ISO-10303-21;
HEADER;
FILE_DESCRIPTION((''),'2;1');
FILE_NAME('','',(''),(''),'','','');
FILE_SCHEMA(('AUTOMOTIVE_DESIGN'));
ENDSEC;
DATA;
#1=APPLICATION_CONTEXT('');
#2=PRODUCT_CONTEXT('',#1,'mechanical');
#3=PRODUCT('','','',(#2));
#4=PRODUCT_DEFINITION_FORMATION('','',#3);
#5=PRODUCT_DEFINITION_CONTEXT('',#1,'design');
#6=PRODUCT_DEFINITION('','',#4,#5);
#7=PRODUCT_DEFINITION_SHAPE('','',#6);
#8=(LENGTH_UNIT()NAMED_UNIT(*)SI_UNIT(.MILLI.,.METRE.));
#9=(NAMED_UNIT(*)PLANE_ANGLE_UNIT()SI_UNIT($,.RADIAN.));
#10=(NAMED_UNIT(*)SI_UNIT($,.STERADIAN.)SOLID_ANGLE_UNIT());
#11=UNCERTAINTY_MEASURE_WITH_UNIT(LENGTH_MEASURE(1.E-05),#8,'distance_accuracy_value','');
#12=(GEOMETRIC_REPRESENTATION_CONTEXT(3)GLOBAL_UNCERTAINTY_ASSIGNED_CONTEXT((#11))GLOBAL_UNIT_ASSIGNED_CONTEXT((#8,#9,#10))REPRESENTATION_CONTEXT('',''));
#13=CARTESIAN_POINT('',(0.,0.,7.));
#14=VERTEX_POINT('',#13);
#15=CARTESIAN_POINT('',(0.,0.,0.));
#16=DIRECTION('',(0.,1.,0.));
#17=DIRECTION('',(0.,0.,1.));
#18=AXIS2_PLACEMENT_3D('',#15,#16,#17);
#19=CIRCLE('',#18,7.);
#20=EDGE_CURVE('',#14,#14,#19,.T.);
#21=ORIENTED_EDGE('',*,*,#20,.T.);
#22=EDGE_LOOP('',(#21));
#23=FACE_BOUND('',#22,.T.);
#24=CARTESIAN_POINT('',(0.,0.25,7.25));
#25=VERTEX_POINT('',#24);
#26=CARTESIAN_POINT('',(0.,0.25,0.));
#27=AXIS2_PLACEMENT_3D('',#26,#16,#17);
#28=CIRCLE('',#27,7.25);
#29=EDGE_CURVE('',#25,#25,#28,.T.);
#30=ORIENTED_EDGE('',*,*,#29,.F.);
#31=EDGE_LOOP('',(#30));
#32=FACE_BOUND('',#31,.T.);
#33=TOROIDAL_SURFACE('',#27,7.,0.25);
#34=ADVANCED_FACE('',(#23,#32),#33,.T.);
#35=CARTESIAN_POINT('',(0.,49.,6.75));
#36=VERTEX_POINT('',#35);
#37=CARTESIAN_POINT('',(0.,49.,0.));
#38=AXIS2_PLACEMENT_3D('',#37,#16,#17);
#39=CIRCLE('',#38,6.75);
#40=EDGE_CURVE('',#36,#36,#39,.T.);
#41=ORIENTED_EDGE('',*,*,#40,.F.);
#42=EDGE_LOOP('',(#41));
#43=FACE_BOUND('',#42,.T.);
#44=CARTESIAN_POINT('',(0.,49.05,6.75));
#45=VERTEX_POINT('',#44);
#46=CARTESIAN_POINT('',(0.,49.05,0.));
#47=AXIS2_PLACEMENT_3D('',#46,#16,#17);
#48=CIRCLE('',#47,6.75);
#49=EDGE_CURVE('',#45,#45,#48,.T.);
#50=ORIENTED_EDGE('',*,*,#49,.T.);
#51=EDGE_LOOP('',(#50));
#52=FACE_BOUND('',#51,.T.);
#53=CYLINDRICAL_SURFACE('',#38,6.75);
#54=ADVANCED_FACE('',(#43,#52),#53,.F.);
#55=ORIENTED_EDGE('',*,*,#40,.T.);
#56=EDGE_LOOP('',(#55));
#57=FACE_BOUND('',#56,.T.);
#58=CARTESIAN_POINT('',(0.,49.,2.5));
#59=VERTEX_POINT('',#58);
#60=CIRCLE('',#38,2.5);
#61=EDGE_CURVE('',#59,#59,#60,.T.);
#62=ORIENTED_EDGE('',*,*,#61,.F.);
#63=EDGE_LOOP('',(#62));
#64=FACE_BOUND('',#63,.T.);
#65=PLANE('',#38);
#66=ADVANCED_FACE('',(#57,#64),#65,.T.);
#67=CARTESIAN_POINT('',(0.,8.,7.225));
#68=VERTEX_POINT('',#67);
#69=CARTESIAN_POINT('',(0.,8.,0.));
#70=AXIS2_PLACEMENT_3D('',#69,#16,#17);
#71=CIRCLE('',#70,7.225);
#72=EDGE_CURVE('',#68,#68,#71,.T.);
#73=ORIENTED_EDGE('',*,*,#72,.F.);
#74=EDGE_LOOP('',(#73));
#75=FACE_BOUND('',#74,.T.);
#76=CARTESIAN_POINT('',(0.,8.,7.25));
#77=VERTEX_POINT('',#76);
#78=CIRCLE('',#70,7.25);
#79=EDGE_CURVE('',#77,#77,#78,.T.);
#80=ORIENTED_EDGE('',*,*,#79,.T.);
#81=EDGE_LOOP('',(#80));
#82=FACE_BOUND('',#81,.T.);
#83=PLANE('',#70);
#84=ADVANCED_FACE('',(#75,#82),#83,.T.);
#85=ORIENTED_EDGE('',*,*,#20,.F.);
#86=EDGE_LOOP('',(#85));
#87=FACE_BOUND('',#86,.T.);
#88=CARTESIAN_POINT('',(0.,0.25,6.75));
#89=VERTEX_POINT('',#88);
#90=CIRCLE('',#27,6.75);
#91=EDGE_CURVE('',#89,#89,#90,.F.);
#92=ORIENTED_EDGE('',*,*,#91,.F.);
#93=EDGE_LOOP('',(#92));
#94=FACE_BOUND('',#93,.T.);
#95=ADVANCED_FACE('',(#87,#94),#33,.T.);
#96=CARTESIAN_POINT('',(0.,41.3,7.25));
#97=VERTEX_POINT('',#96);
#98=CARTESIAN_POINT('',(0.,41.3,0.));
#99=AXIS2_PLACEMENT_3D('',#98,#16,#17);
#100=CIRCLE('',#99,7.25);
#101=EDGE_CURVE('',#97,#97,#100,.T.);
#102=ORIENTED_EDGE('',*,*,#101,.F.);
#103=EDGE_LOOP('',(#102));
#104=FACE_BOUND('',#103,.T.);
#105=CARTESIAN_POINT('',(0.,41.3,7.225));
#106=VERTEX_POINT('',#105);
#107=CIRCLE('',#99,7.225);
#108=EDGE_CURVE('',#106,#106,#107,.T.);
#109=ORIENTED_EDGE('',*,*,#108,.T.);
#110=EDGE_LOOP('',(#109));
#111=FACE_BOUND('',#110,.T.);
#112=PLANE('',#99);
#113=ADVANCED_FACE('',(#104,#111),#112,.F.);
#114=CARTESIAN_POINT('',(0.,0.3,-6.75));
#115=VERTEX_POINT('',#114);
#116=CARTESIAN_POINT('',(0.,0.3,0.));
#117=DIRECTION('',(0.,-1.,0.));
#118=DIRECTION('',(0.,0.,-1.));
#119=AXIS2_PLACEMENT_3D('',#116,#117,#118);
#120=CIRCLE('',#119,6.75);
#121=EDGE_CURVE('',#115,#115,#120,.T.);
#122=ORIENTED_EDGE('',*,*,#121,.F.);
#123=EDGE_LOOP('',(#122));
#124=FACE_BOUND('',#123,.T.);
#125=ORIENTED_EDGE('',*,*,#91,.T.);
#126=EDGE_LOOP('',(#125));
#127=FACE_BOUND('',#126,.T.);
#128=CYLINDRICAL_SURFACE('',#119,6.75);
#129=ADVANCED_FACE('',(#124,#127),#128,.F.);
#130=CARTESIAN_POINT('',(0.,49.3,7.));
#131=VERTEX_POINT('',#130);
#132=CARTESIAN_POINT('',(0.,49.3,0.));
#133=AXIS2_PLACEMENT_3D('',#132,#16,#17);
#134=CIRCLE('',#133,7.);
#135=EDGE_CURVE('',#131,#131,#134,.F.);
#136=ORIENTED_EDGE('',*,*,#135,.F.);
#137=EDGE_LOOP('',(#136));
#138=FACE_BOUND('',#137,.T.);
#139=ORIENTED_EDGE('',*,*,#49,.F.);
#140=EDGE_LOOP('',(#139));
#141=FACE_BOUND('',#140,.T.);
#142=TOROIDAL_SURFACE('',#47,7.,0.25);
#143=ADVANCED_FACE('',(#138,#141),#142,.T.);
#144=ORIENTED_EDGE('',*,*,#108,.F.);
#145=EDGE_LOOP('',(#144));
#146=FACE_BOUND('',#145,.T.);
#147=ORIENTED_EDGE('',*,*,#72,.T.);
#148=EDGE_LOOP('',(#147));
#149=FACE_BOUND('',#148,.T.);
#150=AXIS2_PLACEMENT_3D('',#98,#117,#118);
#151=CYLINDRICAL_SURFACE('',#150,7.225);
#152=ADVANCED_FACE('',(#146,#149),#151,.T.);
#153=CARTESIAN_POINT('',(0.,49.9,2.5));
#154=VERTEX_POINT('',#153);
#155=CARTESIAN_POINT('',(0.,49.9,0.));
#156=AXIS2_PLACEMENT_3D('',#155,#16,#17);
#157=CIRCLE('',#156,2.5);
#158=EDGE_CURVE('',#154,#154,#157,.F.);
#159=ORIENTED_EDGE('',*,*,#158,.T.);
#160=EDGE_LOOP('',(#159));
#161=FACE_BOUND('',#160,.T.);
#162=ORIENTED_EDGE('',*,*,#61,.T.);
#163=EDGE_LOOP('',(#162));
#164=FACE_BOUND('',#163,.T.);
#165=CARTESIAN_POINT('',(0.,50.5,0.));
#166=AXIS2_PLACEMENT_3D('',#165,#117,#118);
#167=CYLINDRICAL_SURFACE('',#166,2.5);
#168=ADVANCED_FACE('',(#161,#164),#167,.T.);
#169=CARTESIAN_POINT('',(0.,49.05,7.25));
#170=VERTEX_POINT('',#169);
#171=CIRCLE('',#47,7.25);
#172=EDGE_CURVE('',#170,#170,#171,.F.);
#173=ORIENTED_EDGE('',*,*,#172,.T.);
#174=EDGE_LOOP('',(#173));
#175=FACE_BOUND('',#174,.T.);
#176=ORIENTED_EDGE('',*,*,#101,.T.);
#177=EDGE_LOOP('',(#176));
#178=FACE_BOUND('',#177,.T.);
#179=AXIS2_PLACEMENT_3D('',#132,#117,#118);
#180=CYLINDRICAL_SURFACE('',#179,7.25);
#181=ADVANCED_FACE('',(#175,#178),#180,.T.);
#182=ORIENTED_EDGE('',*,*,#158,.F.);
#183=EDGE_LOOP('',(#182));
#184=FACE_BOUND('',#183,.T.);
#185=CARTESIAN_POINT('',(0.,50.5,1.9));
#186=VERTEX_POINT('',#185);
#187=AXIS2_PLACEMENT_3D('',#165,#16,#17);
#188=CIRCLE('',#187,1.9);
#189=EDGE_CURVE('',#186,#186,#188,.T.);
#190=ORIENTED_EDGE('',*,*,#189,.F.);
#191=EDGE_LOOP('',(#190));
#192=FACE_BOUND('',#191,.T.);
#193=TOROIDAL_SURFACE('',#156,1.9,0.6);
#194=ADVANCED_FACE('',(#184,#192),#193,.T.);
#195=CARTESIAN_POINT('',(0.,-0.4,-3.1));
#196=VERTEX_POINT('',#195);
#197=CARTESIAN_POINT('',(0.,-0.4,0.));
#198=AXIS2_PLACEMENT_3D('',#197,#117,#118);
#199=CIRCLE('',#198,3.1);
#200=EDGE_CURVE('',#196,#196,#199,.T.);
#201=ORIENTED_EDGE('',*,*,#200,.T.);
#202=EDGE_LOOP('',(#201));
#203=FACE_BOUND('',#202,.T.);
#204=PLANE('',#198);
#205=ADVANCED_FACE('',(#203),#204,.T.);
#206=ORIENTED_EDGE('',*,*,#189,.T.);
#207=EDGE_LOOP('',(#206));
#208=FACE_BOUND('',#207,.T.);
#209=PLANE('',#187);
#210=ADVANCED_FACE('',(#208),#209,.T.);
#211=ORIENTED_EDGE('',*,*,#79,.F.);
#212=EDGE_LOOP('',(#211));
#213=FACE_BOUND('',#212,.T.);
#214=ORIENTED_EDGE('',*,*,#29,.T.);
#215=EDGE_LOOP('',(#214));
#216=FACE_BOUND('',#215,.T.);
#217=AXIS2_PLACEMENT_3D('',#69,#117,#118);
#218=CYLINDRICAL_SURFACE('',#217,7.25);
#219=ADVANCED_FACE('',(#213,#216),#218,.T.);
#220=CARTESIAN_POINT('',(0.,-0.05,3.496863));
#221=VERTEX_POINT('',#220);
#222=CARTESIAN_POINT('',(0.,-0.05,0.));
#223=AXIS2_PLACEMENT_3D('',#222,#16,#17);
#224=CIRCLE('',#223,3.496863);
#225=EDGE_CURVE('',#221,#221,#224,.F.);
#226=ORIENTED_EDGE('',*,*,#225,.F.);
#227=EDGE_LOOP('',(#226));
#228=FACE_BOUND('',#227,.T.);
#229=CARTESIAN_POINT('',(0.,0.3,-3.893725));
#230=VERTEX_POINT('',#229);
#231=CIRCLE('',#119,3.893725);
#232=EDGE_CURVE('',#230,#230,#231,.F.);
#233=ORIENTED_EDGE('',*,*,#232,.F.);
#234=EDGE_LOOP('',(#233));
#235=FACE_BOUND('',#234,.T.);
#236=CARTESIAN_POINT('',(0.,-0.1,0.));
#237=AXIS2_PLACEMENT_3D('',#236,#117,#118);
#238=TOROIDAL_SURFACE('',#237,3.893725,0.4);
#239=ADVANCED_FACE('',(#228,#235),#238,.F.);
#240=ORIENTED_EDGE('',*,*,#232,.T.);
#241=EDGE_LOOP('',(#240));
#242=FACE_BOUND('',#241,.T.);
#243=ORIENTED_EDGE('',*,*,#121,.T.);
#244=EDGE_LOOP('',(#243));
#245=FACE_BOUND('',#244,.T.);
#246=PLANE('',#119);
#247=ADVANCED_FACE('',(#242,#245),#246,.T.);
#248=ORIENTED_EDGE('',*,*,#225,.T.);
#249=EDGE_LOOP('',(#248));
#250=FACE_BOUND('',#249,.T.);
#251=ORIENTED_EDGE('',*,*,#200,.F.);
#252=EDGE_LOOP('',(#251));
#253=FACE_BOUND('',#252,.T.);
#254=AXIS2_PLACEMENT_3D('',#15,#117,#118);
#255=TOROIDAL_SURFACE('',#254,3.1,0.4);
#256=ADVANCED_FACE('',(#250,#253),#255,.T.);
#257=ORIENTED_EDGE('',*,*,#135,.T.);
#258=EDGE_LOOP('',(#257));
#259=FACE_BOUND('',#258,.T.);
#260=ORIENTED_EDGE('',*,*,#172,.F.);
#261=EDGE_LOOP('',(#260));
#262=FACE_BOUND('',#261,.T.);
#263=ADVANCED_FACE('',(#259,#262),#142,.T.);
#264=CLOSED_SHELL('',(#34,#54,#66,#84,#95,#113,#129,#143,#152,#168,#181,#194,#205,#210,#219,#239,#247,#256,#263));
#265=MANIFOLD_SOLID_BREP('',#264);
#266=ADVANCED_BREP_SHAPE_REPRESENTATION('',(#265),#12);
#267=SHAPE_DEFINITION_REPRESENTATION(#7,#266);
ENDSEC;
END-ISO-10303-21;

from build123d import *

# Parameters (mm, degrees)
SKETCH1_R           = 7.25
BOSS_EXTRUDE1_DEPTH = 8
SKETCH2_R           = 7.225
BOSS_EXTRUDE2_DEPTH = 33.3
SKETCH3_R           = 7.25
BOSS_EXTRUDE3_DEPTH = 8
SKETCH4_R           = 6.75
CUT_EXTRUDE1_DEPTH  = 0.3
SKETCH5_R           = 2.5
BOSS_EXTRUDE4_DEPTH = 1.5
CUT_EXTRUDE2_START  = -0.3
SKETCH6_R           = 6.75
CUT_EXTRUDE2_DEPTH  = 0.3
SKETCH7_R           = 3.5
BOSS_EXTRUDE5_DEPTH = 0.7
FILLET1_R           = 0.6
FILLET3_R           = 0.25
FILLET4_R           = 0.4
FILLET5_R           = 0.4


with BuildPart() as part:
    # Sketch1 → Boss-Extrude1 (new body)
    with BuildSketch(Plane(origin=(0, 0, 0), x_dir=(1, 0, 0), z_dir=(0, 1, 0))):
        with Locations(Location((0, 0, 0), (0, 0, 270))):
            Circle(SKETCH1_R)
    extrude(amount=BOSS_EXTRUDE1_DEPTH)

    # Sketch2 → Boss-Extrude2 (add)
    with BuildSketch(Plane(origin=(0, 8, 0), x_dir=(1, 0, 0), z_dir=(0, 1, 0))):
        with Locations(Location((0, 0, 0), (0, 0, 270))):
            Circle(SKETCH2_R)
    extrude(amount=BOSS_EXTRUDE2_DEPTH)

    # Sketch3 → Boss-Extrude3 (add)
    with BuildSketch(Plane(origin=(0, 41.3, 0), x_dir=(1, 0, 0), z_dir=(0, 1, 0))):
        with Locations(Location((0, 0, 0), (0, 0, 270))):
            Circle(SKETCH3_R)
    extrude(amount=BOSS_EXTRUDE3_DEPTH)

    # Sketch4 → Cut-Extrude1 (cut)
    with BuildSketch(Plane(origin=(0, 49.3, 0), x_dir=(1, 0, 0), z_dir=(0, 1, 0))):
        with Locations(Location((0, 0, 0), (0, 0, 270))):
            Circle(SKETCH4_R)
    extrude(amount=-CUT_EXTRUDE1_DEPTH, mode=Mode.SUBTRACT)

    # Sketch5 → Boss-Extrude4 (add)
    with BuildSketch(Plane(origin=(0, 49, 0), x_dir=(1, 0, 0), z_dir=(0, 1, 0))):
        with Locations(Location((0, 0, 0), (0, 0, 270))):
            Circle(SKETCH5_R)
    extrude(amount=BOSS_EXTRUDE4_DEPTH)

    # Sketch6 → Cut-Extrude2 (cut)
    with BuildSketch(Plane.XZ.offset(CUT_EXTRUDE2_START)):
        with Locations(Location((0, 0, 0), (0, 0, 90))):
            Circle(SKETCH6_R)
    extrude(amount=CUT_EXTRUDE2_DEPTH, mode=Mode.SUBTRACT)

    # Sketch7 → Boss-Extrude5 (add)
    with BuildSketch(Plane.XZ.offset(-0.3)):
        with Locations(Location((0, 0, 0), (0, 0, 270))):
            Circle(SKETCH7_R)
    extrude(amount=BOSS_EXTRUDE5_DEPTH)

    # Fillet1
    fillet1_edges = [part.edges().sort_by_distance(p)[0] for p in [
        (0, 50.5, -2.5),
    ]]
    fillet(fillet1_edges, radius=FILLET1_R)

    # Fillet3
    fillet3_edges = [part.edges().sort_by_distance(p)[0] for p in [
        (0, 49.3, -6.75),
        (0, 0, -7.25),
        (0, 0, -6.75),
        (0, 49.3, -7.25),
    ]]
    fillet(fillet3_edges, radius=FILLET3_R - 0.0001)  # a hair under: the kernel refuses the full size

    # Fillet4
    fillet4_edges = [part.edges().sort_by_distance(p)[0] for p in [
        (0, -0.4, 3.5),
    ]]
    fillet(fillet4_edges, radius=FILLET4_R)

    # Fillet5
    fillet5_edges = [part.edges().sort_by_distance(p)[0] for p in [
        (0, 0.3, 3.5),
    ]]
    fillet(fillet5_edges, radius=FILLET5_R)


solid = part.part
